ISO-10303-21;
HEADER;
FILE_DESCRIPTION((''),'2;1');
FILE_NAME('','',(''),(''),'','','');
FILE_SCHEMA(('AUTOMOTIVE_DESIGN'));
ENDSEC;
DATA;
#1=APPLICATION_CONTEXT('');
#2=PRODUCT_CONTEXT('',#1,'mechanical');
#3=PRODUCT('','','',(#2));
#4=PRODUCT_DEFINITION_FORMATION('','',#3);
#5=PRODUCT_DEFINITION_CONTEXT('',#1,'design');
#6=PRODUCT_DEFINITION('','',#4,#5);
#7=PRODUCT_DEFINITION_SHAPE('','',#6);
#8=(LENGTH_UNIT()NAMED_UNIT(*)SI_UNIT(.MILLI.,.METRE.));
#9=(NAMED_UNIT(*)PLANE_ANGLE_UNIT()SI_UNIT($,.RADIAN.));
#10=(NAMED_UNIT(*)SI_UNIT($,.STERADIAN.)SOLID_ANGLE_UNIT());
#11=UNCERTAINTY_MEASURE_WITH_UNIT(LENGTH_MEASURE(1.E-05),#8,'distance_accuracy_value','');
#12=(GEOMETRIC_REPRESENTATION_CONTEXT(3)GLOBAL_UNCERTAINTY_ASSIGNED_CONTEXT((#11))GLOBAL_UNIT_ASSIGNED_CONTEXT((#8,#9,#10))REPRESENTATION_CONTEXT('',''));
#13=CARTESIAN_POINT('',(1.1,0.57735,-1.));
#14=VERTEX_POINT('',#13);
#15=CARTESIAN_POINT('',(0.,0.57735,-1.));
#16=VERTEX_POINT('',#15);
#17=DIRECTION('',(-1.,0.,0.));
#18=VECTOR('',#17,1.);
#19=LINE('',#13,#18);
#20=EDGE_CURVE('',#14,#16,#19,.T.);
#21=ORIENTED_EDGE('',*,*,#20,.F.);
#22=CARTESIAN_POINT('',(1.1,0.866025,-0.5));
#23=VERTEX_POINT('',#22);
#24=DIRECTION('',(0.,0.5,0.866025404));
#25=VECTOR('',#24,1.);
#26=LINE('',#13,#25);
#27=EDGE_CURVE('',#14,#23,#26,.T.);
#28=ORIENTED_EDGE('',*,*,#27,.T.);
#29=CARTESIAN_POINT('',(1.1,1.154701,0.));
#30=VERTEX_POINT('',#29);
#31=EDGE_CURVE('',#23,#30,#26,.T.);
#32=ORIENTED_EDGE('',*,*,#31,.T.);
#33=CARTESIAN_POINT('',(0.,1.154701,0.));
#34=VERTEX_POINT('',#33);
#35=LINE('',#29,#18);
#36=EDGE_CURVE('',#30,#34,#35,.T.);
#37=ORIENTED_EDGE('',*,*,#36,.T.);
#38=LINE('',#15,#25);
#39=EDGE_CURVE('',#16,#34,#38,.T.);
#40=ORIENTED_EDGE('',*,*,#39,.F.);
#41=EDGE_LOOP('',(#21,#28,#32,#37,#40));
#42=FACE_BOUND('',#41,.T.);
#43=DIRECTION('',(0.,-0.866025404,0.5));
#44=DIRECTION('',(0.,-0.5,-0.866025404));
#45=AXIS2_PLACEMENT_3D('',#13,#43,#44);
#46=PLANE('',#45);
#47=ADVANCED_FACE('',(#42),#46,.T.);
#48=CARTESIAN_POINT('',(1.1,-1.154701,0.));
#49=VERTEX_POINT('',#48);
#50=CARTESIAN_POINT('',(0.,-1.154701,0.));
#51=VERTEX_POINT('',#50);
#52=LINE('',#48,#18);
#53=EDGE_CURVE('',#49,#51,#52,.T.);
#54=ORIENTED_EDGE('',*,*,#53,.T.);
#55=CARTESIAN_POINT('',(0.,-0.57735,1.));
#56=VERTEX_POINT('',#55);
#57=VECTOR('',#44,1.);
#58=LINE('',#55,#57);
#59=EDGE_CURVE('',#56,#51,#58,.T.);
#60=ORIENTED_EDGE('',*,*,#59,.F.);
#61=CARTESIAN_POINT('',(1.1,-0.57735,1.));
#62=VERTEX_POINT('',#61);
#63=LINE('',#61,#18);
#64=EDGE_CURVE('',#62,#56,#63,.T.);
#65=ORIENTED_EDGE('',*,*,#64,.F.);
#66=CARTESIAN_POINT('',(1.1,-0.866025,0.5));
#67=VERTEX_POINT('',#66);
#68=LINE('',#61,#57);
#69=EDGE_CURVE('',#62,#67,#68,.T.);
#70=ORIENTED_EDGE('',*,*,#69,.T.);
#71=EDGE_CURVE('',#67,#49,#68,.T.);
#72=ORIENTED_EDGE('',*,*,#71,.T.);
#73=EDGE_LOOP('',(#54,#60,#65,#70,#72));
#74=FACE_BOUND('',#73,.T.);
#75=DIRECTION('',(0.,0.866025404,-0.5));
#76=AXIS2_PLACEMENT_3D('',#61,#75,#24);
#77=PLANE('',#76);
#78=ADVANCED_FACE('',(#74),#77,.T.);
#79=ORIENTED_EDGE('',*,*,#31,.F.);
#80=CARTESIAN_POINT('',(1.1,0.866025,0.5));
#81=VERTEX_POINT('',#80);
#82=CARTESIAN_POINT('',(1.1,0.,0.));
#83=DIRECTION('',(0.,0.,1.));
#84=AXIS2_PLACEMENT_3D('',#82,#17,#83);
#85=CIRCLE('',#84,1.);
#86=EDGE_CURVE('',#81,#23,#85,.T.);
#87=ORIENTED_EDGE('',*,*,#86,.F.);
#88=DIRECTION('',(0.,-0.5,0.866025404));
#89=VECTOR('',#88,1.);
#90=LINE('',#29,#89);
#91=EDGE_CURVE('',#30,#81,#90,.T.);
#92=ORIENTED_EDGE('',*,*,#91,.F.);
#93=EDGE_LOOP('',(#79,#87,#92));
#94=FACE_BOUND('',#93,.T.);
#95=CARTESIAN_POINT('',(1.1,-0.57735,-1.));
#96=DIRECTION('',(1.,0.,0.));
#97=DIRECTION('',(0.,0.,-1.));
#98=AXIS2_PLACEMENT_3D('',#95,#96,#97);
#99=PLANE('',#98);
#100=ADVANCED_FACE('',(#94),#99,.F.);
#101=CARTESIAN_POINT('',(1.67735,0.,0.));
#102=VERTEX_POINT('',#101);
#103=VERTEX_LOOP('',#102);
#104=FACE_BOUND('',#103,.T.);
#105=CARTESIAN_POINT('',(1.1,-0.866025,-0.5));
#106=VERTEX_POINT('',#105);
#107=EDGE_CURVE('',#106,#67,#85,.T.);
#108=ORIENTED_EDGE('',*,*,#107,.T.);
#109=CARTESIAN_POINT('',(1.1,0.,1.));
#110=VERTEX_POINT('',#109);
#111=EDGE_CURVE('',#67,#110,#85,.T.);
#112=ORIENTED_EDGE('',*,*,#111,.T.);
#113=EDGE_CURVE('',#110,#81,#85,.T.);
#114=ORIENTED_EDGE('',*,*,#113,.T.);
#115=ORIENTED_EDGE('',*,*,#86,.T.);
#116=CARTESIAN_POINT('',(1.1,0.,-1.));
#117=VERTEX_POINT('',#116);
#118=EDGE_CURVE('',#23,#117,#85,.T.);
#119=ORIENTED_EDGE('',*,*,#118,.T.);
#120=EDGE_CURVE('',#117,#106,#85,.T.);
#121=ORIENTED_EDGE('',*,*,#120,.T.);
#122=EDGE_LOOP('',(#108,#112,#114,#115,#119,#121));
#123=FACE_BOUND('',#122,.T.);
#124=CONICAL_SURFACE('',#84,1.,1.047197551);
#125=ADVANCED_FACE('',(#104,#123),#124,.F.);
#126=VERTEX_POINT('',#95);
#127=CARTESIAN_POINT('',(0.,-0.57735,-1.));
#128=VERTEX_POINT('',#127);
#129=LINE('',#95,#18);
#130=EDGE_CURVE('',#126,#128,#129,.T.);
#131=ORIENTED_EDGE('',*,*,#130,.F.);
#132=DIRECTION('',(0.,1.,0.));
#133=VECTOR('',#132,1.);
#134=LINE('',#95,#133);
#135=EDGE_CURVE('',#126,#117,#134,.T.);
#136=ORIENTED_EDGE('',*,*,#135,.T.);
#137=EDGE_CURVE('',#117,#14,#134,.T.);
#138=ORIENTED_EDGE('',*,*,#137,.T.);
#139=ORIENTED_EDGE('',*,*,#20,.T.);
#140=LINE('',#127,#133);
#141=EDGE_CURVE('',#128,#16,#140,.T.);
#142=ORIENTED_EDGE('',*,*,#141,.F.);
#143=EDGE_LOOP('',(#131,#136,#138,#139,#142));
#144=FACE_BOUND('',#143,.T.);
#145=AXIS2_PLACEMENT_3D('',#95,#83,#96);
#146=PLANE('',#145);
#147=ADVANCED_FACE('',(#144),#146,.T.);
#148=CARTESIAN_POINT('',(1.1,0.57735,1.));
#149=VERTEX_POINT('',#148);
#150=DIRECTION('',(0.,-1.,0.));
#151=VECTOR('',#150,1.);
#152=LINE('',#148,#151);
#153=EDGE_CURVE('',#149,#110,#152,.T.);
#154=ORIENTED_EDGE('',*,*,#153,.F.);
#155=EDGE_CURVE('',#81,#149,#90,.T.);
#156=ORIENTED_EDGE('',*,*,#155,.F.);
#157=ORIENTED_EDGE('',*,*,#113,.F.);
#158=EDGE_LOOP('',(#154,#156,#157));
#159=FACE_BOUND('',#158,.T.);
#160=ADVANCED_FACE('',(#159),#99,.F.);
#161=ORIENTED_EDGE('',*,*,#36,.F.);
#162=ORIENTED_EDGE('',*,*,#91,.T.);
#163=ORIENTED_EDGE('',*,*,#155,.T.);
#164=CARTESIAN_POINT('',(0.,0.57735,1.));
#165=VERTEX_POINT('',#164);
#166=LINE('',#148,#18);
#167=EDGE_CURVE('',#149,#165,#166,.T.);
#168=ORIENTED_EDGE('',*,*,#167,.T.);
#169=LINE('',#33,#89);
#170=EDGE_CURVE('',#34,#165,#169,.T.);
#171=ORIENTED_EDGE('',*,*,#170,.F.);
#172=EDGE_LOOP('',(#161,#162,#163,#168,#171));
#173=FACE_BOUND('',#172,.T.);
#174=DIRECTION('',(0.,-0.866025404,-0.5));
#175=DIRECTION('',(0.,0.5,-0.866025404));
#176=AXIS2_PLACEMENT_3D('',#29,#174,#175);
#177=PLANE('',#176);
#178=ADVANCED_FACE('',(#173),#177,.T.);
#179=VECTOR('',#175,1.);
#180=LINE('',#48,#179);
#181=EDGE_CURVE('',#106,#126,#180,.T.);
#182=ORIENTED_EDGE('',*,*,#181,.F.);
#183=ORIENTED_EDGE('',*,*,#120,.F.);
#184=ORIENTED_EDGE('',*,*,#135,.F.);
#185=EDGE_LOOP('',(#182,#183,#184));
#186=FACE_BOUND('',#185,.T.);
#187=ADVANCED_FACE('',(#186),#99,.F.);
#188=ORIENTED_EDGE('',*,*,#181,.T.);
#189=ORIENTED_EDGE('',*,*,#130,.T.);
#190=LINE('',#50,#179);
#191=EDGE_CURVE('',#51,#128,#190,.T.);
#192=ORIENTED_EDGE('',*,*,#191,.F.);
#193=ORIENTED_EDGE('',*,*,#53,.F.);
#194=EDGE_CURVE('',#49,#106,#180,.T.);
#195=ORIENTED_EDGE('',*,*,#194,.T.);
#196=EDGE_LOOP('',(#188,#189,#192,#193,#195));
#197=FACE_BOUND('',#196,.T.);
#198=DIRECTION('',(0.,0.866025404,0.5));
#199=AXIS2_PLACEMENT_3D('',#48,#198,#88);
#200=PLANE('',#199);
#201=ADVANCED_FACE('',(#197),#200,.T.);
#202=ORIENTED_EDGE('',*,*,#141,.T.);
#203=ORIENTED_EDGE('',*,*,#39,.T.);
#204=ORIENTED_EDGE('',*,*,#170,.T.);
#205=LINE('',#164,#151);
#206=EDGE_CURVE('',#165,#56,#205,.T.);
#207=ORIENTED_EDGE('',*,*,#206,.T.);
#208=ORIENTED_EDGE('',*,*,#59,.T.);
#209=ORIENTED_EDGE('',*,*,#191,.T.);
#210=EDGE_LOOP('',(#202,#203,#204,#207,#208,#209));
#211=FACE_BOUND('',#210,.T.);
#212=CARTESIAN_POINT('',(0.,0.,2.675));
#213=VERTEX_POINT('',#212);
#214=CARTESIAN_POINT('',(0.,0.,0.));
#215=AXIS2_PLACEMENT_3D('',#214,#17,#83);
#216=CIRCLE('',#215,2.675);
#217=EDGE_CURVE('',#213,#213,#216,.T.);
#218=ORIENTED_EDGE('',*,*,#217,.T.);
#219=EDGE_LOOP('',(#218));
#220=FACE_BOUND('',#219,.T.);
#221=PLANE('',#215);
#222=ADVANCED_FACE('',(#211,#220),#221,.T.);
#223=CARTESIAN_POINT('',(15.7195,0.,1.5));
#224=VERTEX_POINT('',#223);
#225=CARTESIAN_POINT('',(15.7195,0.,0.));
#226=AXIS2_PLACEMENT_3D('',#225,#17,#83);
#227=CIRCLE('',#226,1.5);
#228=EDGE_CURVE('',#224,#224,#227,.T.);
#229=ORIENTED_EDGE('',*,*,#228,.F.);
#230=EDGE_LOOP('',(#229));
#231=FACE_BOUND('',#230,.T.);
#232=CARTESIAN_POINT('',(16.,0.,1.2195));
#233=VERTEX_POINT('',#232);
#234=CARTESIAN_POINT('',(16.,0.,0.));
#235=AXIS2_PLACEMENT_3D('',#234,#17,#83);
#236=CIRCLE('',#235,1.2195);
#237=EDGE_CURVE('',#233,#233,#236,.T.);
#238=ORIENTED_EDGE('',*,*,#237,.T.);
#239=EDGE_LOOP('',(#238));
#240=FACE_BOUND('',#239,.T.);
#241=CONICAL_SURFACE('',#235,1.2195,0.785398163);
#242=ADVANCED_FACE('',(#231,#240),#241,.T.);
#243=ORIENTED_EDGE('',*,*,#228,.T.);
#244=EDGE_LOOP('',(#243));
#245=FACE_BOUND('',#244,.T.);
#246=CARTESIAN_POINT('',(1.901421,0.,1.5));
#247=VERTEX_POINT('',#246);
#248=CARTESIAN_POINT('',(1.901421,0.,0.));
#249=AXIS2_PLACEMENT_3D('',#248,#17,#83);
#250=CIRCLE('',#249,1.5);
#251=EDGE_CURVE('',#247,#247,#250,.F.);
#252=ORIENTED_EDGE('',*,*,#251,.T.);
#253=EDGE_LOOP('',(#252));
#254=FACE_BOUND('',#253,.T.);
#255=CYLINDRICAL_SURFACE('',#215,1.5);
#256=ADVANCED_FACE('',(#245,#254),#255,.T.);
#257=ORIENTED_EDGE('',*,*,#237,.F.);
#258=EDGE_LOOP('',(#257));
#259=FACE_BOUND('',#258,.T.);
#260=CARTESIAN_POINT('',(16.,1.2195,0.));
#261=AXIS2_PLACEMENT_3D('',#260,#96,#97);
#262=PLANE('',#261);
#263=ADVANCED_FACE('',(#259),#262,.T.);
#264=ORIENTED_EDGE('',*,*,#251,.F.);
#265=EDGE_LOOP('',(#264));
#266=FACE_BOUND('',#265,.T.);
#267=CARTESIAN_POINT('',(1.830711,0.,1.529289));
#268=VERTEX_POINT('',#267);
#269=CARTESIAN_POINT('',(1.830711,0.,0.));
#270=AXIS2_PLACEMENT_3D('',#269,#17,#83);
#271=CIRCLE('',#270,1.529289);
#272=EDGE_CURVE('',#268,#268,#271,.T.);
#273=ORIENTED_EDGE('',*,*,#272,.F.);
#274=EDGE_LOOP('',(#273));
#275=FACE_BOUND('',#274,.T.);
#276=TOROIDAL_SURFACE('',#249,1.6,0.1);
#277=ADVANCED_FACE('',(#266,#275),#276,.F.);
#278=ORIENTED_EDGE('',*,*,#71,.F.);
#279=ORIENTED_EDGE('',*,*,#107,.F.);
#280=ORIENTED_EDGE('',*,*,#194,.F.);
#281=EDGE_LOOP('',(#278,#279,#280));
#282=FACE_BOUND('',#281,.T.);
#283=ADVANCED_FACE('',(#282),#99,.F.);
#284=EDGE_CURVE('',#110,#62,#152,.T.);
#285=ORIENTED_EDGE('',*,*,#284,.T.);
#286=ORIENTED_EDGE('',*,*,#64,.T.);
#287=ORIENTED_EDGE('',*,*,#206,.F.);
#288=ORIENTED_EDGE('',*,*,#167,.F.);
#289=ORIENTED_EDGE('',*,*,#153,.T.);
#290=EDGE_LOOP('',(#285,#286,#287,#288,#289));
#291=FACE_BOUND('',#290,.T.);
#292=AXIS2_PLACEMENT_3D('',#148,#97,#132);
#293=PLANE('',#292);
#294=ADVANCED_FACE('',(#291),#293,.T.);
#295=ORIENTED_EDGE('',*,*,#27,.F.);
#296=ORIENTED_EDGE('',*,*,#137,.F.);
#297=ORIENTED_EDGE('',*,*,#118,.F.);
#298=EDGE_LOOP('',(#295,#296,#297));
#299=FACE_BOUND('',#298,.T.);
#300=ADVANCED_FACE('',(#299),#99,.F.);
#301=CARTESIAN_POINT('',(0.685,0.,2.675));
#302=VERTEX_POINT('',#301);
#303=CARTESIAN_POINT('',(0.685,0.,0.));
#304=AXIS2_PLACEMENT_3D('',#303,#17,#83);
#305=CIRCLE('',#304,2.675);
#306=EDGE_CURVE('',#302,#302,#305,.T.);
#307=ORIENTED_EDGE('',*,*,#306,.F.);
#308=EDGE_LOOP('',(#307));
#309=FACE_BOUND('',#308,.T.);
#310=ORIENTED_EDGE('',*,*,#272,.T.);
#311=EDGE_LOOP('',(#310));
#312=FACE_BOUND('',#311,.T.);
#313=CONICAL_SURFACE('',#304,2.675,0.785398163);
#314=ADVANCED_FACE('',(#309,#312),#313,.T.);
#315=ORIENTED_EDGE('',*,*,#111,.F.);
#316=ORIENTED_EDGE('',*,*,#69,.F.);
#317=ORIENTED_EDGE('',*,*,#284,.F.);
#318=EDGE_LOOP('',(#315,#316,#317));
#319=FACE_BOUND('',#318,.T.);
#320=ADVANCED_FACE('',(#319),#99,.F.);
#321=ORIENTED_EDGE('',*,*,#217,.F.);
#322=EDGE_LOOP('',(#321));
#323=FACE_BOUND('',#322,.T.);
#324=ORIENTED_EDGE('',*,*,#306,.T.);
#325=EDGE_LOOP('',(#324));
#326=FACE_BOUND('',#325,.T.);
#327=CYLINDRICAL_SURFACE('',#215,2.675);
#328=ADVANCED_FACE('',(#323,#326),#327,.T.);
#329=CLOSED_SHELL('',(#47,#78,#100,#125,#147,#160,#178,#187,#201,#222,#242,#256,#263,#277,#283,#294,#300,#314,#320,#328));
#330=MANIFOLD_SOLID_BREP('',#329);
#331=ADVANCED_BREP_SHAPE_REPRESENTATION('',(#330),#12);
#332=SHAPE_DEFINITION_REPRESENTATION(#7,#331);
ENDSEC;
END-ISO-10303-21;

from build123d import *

# Parameters (mm, degrees)
FILLET1_R   = 0.1
HEX_START   = -1.1
HEX_2_DEPTH = 1.1


with BuildPart() as part:
    # BodySke → BaseBody (revolve)
    with BuildSketch(Plane.XY, mode=Mode.PRIVATE) as basebody_sk:
        Polygon((0, 0), (0, 2.675), (0.685, 2.675), (1.86, 1.5), (15.7195, 1.5), (16, 1.2195), (16, 0), align=None)
    revolve(basebody_sk.sketch.rotate(Axis((0, 0, 0), (1, 0, 0)), 90), axis=Axis((0, 0, 0), (1, 0, 0)))

    # Fillet1
    fillet1_edges = [part.edges().sort_by_distance(p)[0] for p in [
        (1.86, 0, -1.5),
    ]]
    fillet(fillet1_edges, radius=FILLET1_R)

    # Hex 2: read off the stored shape, not the designer's step
    # Hex 2 outline → Hex 2 (cut)
    with BuildSketch(Plane.ZY.offset(HEX_START)):
        Polygon((-1, -0.577350269), (0, -1.154700538), (1, -0.577350269), (1, 0.577350269), (0, 1.154700538), (-1, 0.577350269), align=None)
    extrude(amount=HEX_2_DEPTH, mode=Mode.SUBTRACT)

    # Hex 2 2 outline → Hex 2 2 (revolve, cut)
    with BuildSketch(Plane.YX):
        Polygon((1, 1.1), (0, 1.677350269), (0, 1.1), align=None)
    revolve(axis=Axis((0, 0, 0), (1, 0, 0)), mode=Mode.SUBTRACT)


solid = part.part
